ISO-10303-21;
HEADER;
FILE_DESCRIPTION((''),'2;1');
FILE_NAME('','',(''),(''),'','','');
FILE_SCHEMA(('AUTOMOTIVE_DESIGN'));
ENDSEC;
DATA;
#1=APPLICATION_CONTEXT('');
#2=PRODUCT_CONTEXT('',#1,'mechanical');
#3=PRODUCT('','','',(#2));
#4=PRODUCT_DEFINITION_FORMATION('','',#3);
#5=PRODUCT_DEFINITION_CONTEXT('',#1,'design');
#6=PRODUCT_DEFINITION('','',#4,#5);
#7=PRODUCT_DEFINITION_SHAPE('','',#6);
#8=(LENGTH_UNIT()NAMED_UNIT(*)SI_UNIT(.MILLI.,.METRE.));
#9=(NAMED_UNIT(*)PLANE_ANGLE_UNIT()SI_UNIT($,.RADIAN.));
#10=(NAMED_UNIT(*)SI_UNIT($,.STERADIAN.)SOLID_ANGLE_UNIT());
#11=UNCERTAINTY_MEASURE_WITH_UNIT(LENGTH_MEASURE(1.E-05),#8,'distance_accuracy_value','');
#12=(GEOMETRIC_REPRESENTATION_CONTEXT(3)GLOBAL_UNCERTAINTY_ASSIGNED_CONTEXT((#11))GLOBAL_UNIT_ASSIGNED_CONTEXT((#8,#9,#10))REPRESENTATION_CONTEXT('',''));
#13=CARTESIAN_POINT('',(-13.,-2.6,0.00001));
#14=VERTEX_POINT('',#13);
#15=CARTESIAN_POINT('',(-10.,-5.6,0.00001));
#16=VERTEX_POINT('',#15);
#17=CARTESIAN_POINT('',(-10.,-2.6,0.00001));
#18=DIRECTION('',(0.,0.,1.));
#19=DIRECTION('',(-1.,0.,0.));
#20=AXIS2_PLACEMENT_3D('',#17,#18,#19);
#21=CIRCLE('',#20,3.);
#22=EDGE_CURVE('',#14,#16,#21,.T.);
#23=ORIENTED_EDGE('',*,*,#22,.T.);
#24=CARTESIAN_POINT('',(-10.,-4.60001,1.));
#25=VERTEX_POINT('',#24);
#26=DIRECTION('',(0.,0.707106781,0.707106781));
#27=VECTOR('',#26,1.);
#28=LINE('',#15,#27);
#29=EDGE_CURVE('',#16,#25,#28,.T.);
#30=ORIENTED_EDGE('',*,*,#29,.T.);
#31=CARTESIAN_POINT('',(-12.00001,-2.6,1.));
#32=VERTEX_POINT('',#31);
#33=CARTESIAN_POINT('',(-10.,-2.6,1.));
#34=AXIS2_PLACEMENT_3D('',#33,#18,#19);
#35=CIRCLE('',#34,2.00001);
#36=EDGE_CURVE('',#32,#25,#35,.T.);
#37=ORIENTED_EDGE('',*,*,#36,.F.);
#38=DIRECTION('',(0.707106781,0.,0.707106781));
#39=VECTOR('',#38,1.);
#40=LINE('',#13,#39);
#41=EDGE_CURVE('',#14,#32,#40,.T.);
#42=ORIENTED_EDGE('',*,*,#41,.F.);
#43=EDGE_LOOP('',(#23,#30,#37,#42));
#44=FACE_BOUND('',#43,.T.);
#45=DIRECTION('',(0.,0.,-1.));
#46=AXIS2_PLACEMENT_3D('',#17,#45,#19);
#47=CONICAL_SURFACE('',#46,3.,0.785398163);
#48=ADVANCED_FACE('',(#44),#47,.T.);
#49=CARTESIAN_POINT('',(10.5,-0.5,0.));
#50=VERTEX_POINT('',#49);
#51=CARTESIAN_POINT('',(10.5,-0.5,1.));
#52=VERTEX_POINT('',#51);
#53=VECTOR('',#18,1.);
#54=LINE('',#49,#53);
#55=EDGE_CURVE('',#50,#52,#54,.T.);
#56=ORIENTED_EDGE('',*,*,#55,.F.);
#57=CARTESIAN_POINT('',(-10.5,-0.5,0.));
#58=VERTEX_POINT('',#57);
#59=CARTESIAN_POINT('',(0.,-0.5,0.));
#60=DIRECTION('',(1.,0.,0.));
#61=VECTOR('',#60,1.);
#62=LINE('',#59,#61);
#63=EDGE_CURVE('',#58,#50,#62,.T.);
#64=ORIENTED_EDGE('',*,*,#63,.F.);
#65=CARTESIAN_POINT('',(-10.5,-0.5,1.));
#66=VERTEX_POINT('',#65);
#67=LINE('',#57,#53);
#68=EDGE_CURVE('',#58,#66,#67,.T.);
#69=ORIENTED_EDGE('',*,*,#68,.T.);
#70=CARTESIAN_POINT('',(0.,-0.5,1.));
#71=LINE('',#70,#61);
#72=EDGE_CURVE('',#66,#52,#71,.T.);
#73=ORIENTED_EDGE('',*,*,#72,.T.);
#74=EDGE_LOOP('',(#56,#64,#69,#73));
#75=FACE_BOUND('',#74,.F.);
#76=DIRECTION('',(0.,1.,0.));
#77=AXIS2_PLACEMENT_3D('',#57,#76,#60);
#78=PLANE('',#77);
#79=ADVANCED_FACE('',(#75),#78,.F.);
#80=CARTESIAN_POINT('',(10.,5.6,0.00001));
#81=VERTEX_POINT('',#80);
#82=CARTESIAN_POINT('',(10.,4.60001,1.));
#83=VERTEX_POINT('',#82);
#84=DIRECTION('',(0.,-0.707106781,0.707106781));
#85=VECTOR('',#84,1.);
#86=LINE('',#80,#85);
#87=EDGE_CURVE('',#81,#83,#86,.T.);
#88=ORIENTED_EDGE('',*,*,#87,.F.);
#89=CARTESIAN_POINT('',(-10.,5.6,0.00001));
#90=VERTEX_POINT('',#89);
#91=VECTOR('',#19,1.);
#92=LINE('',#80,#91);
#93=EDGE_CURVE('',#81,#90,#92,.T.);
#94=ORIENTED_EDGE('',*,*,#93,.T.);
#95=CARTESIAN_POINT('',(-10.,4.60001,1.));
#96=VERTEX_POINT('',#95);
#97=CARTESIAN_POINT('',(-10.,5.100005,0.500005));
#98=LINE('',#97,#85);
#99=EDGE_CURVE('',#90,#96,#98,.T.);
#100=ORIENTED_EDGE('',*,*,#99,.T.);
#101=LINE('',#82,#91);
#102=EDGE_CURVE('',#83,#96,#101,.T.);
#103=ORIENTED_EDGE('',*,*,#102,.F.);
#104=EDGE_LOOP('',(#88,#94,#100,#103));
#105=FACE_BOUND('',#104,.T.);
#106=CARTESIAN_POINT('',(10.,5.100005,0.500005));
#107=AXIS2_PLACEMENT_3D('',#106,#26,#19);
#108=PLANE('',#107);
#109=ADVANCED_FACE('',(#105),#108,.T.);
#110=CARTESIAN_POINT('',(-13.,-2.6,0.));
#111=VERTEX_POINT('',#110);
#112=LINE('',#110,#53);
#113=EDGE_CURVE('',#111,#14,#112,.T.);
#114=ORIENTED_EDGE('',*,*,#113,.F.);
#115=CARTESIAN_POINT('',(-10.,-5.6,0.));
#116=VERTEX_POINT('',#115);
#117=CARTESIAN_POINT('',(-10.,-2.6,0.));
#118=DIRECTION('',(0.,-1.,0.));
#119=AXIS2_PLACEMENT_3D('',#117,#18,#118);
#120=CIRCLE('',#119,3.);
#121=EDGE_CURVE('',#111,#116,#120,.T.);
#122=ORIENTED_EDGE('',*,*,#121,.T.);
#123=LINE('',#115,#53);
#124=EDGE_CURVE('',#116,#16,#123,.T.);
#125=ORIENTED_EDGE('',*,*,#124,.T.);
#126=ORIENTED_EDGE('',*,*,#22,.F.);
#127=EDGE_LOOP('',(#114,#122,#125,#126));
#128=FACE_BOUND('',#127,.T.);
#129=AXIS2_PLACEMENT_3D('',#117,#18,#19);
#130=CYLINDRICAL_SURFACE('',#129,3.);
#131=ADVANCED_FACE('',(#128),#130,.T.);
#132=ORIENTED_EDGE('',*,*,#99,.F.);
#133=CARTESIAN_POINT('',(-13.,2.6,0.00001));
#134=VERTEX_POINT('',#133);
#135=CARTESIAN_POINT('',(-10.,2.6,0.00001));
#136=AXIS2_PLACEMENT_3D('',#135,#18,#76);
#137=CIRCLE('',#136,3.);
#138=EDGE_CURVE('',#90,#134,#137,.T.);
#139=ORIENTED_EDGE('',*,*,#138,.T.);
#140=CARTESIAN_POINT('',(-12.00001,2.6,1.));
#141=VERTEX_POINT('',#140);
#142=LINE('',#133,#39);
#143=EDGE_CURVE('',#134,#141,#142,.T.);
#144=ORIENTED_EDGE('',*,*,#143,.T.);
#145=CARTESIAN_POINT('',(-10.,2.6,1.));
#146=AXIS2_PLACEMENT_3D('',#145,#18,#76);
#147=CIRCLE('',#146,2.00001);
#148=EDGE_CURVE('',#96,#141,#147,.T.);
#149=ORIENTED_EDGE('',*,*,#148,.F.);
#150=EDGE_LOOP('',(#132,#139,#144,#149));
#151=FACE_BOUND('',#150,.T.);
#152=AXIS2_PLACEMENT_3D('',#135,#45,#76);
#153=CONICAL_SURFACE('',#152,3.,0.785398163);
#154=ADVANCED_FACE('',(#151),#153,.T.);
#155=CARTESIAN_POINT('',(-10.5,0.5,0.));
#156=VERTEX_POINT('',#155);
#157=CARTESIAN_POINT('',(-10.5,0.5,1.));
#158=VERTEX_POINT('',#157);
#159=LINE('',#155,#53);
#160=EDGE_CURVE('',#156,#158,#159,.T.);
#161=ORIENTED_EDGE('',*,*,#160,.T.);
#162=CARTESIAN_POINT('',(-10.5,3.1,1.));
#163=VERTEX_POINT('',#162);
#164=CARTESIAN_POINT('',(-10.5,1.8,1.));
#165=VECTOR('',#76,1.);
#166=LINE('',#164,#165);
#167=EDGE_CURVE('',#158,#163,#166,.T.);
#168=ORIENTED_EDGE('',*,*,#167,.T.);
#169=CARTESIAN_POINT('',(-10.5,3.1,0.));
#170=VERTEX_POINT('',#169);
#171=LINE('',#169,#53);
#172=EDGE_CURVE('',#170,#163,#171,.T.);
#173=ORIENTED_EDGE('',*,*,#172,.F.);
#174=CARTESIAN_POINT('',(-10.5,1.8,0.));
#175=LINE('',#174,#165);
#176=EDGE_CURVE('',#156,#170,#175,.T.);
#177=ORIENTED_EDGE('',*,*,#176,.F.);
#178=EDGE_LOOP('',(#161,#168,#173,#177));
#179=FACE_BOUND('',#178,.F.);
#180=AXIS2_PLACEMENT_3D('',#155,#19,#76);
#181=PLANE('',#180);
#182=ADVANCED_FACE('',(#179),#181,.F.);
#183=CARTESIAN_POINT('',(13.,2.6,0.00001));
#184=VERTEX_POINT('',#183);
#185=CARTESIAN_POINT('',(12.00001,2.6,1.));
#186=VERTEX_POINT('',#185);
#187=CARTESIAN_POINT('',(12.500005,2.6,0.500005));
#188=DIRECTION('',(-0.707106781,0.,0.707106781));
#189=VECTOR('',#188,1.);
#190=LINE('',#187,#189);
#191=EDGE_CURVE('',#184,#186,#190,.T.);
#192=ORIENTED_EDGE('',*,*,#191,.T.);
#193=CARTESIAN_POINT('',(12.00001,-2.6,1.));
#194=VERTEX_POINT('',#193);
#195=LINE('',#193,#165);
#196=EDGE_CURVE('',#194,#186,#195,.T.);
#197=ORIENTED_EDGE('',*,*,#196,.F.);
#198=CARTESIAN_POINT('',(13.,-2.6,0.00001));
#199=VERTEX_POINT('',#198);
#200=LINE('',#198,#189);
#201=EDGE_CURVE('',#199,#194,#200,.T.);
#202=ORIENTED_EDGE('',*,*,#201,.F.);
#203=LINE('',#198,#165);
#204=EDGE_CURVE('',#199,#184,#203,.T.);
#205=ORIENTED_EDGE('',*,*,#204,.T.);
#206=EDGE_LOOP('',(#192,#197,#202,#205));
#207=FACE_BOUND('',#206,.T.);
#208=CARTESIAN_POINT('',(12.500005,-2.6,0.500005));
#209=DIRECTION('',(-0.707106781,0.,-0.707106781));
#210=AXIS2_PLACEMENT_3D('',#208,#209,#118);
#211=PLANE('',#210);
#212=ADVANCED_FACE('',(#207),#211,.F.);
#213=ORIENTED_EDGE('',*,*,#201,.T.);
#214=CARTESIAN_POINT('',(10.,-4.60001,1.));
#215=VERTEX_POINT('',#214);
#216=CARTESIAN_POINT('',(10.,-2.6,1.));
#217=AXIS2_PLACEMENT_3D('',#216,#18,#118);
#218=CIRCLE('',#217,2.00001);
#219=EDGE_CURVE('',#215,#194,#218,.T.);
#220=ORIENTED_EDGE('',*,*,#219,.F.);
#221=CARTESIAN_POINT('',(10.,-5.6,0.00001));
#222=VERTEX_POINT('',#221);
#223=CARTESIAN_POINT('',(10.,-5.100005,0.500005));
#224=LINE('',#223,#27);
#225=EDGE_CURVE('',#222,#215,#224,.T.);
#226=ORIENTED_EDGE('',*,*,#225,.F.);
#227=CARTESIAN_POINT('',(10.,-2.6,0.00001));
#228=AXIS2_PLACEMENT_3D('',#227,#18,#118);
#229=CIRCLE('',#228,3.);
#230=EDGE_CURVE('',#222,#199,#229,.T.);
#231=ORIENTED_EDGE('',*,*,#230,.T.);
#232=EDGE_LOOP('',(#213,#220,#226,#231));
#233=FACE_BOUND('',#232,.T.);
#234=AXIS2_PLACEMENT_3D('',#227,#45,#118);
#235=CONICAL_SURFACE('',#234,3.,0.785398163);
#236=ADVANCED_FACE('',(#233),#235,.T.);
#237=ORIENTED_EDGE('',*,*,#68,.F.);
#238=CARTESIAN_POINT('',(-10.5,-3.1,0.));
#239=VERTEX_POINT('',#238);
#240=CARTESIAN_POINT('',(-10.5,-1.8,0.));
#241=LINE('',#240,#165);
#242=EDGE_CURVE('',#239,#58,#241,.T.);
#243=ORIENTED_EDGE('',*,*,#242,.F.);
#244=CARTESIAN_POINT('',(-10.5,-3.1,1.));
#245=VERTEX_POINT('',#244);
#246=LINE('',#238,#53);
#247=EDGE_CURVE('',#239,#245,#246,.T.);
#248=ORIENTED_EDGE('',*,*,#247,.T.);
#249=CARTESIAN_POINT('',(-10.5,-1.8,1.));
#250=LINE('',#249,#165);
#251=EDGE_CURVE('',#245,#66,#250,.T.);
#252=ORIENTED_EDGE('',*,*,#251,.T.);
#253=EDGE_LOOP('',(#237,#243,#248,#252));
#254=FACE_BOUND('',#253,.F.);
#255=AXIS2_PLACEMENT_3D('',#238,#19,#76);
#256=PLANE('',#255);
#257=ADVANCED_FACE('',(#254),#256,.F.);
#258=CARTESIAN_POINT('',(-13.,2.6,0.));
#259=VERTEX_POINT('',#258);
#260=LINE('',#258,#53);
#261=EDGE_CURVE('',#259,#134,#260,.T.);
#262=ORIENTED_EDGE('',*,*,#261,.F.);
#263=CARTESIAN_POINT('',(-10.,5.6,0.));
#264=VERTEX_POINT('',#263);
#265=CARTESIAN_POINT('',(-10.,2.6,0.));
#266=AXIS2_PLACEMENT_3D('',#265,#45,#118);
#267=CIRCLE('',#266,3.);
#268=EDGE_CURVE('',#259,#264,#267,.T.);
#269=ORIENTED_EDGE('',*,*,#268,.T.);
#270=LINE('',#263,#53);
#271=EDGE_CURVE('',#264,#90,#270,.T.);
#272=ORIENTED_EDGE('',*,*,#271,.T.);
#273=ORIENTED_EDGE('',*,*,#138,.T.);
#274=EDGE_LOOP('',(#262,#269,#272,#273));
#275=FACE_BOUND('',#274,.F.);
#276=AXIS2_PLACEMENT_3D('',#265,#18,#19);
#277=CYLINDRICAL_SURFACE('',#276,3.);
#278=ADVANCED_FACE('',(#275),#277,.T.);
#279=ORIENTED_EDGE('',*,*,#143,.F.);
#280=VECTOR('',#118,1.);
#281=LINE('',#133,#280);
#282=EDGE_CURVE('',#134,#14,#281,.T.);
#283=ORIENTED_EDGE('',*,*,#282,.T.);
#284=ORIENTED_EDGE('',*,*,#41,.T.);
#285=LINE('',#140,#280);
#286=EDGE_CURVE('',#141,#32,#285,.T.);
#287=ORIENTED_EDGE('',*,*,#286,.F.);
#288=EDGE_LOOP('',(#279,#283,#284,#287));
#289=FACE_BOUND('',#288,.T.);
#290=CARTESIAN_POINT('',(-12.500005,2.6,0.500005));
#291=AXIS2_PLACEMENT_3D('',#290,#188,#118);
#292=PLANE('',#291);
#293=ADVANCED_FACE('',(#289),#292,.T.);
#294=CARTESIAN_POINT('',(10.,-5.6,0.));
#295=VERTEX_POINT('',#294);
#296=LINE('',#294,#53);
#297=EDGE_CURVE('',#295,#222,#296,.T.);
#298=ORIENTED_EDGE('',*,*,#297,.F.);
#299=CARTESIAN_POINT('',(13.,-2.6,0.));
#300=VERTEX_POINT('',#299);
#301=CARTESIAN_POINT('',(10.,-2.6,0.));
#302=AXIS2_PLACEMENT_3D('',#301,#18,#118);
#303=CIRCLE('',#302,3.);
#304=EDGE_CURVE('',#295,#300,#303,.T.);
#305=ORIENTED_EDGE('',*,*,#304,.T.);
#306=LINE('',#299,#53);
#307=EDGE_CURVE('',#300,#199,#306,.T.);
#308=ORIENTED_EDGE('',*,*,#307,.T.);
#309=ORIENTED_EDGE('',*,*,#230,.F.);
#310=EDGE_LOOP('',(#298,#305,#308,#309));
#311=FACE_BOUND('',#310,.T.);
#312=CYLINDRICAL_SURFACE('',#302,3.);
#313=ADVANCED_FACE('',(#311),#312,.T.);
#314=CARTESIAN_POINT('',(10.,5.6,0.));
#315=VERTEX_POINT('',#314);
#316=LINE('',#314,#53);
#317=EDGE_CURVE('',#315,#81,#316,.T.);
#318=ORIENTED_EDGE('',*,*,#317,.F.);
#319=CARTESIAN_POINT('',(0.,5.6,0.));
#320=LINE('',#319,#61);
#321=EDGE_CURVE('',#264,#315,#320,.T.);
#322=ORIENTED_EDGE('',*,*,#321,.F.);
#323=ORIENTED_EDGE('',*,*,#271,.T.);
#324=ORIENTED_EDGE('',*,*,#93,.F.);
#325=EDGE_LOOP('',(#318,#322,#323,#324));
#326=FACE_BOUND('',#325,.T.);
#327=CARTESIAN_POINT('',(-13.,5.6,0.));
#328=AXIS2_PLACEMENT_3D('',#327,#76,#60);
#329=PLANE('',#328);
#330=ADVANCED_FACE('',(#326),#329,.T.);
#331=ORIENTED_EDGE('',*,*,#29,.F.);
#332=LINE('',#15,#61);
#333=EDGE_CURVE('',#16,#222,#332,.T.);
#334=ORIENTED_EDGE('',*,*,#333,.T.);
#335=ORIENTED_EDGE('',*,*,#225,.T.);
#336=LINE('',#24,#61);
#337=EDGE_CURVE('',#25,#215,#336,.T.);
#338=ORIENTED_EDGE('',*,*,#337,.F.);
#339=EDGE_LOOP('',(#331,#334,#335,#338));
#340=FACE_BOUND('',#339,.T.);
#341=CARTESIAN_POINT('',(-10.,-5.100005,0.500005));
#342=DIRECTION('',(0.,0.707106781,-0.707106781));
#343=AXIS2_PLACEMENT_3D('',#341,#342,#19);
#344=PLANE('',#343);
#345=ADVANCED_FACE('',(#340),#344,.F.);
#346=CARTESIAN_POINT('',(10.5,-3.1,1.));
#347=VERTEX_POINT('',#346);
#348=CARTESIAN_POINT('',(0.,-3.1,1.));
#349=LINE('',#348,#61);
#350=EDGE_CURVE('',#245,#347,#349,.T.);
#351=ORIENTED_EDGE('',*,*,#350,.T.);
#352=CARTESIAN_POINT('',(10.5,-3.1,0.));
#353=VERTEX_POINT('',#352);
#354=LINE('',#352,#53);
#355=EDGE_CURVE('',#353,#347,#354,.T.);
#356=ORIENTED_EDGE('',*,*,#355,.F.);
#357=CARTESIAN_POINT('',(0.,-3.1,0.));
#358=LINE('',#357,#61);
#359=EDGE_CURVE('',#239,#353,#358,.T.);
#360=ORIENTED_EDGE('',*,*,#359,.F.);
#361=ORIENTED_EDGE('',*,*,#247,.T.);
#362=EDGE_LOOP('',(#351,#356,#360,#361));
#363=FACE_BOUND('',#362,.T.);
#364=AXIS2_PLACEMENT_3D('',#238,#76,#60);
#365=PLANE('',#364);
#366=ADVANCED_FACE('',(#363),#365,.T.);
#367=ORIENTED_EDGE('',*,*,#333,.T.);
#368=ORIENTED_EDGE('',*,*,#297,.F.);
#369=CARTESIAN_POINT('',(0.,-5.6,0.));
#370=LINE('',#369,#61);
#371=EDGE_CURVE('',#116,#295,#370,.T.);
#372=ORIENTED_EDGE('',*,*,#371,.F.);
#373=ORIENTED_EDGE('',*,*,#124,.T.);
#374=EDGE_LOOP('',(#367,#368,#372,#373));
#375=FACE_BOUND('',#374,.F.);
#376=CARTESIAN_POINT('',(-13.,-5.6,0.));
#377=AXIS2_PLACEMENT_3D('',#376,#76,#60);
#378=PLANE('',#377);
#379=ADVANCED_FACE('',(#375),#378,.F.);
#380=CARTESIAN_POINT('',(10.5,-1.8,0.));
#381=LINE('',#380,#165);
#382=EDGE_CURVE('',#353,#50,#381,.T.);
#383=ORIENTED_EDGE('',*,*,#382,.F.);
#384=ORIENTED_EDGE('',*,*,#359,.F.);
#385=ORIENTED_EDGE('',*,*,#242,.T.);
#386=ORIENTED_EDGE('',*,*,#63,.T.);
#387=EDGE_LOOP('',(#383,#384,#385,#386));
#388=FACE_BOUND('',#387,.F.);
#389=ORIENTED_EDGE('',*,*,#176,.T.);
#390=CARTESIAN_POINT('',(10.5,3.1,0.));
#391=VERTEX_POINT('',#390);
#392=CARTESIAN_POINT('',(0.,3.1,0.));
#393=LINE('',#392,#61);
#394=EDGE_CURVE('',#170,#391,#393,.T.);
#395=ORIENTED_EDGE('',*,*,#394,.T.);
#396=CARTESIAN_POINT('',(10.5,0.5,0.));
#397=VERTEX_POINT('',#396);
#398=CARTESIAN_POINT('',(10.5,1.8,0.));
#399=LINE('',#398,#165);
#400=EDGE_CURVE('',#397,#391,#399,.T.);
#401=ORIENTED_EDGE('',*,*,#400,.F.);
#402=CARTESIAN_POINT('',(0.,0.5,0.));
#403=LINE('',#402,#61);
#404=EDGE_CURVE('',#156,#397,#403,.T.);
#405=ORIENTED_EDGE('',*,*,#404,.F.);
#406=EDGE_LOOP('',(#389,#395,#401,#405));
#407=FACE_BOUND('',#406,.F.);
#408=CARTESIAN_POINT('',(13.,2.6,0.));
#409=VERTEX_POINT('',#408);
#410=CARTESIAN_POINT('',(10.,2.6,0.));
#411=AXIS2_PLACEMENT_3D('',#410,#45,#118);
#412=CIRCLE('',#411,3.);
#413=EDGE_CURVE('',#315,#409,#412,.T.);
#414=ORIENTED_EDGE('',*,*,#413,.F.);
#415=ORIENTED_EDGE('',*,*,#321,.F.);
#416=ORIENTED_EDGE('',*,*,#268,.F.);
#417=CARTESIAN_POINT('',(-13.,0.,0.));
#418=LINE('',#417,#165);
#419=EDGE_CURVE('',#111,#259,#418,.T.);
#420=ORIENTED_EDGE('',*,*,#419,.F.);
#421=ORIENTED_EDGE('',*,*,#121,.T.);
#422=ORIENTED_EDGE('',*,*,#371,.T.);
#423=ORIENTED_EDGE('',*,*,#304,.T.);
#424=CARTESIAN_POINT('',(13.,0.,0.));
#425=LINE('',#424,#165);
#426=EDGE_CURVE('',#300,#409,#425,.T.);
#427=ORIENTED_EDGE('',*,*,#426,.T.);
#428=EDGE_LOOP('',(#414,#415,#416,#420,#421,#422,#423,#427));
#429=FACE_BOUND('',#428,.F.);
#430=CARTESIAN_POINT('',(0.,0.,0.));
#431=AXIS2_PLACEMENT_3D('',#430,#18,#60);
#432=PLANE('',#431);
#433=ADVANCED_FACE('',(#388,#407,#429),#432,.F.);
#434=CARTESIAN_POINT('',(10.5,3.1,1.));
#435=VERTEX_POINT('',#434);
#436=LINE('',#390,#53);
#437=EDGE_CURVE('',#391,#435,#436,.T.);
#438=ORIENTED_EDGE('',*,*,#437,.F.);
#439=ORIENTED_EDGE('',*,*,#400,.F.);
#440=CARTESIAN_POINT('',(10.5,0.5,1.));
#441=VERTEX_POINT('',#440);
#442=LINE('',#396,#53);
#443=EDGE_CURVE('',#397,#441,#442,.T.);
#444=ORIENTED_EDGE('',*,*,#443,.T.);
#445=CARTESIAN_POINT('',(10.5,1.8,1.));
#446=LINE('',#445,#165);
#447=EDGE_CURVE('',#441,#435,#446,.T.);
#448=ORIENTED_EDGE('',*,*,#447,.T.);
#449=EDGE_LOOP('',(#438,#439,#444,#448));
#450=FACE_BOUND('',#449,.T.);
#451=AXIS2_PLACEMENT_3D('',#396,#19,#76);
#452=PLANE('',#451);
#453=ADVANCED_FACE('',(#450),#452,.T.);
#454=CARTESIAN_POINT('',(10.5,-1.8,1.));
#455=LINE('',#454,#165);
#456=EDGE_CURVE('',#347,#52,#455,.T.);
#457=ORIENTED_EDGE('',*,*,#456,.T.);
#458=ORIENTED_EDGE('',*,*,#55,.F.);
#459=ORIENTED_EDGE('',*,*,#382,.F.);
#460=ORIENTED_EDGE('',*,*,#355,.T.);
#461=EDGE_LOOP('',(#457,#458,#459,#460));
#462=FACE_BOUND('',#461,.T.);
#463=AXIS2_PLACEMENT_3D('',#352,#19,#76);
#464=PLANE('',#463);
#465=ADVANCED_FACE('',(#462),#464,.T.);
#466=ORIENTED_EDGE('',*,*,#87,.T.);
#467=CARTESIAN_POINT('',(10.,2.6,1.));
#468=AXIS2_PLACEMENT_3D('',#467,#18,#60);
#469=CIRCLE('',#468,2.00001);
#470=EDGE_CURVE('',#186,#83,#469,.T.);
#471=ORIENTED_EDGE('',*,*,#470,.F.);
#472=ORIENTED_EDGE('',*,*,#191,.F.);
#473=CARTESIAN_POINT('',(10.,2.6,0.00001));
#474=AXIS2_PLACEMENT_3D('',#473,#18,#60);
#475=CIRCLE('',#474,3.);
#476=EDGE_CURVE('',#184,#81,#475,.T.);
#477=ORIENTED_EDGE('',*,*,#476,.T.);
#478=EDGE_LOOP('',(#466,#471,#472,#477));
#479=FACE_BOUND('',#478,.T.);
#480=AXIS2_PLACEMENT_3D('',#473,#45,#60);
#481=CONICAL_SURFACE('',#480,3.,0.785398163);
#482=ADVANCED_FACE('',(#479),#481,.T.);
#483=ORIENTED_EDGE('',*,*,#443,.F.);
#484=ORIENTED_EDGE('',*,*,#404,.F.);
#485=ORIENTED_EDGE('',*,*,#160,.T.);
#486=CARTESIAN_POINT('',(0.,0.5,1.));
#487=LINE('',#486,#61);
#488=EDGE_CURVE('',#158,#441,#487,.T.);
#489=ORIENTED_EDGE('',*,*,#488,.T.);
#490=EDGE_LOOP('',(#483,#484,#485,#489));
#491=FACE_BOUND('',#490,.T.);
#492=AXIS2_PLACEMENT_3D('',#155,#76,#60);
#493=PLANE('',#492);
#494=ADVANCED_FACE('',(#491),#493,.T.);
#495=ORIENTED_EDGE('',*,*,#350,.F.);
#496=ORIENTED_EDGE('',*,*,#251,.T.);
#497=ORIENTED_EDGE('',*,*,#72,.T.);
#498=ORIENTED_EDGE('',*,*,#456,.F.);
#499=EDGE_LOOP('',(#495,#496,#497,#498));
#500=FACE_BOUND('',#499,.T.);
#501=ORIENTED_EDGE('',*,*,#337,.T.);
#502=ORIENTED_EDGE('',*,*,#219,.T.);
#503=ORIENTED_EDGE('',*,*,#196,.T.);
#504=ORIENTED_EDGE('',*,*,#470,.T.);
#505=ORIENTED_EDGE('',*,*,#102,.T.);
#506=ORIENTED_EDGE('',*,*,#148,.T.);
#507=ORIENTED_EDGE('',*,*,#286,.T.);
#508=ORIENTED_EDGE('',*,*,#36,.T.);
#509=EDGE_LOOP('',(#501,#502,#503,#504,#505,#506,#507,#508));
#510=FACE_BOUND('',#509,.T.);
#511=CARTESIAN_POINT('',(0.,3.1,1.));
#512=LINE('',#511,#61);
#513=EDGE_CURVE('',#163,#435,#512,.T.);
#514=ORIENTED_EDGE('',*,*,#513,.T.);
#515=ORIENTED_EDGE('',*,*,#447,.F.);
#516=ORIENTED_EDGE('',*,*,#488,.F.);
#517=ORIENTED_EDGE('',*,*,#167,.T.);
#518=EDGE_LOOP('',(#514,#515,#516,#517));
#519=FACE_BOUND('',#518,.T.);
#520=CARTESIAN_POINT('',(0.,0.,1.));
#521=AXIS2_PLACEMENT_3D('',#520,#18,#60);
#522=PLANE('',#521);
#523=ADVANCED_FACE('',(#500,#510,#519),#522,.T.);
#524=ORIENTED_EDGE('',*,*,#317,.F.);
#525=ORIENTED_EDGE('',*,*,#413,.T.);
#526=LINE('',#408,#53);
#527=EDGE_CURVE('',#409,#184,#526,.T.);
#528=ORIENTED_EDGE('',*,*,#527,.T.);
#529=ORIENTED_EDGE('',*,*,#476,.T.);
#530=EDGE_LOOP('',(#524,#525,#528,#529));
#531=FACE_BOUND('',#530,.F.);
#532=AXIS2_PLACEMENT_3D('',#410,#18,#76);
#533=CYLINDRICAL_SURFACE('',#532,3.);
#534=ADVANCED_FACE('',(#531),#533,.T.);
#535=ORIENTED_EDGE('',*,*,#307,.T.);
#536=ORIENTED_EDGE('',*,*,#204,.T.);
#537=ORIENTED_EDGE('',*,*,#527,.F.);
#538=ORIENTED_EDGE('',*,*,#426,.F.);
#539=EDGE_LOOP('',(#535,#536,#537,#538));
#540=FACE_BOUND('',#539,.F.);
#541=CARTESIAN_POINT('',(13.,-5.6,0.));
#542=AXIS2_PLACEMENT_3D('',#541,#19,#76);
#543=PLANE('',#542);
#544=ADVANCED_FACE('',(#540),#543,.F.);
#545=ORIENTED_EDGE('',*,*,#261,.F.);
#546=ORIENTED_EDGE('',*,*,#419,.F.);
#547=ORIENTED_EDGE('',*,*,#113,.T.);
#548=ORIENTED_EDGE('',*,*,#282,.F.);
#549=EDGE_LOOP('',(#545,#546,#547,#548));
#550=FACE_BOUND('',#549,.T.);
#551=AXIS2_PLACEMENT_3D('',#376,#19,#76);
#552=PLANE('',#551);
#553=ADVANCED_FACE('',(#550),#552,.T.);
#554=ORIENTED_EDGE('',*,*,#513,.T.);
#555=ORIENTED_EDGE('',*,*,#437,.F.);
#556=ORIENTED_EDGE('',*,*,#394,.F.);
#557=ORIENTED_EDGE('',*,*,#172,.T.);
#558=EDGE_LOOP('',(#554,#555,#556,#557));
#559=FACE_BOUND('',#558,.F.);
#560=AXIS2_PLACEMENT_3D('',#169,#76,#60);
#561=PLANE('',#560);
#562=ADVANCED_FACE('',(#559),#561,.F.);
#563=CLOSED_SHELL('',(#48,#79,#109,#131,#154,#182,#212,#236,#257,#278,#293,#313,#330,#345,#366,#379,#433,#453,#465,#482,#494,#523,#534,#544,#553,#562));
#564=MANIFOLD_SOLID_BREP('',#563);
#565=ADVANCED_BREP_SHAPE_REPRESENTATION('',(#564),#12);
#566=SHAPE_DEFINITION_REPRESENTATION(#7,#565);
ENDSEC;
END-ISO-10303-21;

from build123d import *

# Parameters (mm, degrees)
F0_W     = 26
F0_H     = 11.2
F0_W_2   = 21
F0_H_2   = 2.6
F1_DEPTH = 1
F2_R     = 3
F3_SIZE  = 0.99999


# Not quite as in the source:
# - a fillet or chamfer is up to 0.001 mm smaller than in the source, because OpenCascade refuses the exact size


with BuildPart() as f1:
    # F0 (on Top) → F1 (new body)
    with BuildSketch(Plane.XY):
        Rectangle(F0_W, F0_H)
        with Locations((0, -1.8)):
            Rectangle(F0_W_2, F0_H_2, mode=Mode.SUBTRACT)
        with Locations((0, 1.8)):
            Rectangle(F0_W_2, F0_H_2, mode=Mode.SUBTRACT)
    extrude(amount=F1_DEPTH)

    # F2
    f2_edges = [f1.edges().sort_by_distance(p)[0] for p in [
        (-13, 5.6, 0.5),
        (-13, -5.6, 0.5),
        (13, -5.6, 0.5),
        (13, 5.6, 0.5),
    ]]
    fillet(f2_edges, radius=F2_R)

    # F3 (size 1 in the source; OpenCascade refuses exactly that, so slightly less here)
    f3_edges = [f1.edges().sort_by_distance(p)[0] for p in [
        (-12.12132, -4.72132, 1),
    ]]
    chamfer(f3_edges, length=F3_SIZE)


solid = f1.part
